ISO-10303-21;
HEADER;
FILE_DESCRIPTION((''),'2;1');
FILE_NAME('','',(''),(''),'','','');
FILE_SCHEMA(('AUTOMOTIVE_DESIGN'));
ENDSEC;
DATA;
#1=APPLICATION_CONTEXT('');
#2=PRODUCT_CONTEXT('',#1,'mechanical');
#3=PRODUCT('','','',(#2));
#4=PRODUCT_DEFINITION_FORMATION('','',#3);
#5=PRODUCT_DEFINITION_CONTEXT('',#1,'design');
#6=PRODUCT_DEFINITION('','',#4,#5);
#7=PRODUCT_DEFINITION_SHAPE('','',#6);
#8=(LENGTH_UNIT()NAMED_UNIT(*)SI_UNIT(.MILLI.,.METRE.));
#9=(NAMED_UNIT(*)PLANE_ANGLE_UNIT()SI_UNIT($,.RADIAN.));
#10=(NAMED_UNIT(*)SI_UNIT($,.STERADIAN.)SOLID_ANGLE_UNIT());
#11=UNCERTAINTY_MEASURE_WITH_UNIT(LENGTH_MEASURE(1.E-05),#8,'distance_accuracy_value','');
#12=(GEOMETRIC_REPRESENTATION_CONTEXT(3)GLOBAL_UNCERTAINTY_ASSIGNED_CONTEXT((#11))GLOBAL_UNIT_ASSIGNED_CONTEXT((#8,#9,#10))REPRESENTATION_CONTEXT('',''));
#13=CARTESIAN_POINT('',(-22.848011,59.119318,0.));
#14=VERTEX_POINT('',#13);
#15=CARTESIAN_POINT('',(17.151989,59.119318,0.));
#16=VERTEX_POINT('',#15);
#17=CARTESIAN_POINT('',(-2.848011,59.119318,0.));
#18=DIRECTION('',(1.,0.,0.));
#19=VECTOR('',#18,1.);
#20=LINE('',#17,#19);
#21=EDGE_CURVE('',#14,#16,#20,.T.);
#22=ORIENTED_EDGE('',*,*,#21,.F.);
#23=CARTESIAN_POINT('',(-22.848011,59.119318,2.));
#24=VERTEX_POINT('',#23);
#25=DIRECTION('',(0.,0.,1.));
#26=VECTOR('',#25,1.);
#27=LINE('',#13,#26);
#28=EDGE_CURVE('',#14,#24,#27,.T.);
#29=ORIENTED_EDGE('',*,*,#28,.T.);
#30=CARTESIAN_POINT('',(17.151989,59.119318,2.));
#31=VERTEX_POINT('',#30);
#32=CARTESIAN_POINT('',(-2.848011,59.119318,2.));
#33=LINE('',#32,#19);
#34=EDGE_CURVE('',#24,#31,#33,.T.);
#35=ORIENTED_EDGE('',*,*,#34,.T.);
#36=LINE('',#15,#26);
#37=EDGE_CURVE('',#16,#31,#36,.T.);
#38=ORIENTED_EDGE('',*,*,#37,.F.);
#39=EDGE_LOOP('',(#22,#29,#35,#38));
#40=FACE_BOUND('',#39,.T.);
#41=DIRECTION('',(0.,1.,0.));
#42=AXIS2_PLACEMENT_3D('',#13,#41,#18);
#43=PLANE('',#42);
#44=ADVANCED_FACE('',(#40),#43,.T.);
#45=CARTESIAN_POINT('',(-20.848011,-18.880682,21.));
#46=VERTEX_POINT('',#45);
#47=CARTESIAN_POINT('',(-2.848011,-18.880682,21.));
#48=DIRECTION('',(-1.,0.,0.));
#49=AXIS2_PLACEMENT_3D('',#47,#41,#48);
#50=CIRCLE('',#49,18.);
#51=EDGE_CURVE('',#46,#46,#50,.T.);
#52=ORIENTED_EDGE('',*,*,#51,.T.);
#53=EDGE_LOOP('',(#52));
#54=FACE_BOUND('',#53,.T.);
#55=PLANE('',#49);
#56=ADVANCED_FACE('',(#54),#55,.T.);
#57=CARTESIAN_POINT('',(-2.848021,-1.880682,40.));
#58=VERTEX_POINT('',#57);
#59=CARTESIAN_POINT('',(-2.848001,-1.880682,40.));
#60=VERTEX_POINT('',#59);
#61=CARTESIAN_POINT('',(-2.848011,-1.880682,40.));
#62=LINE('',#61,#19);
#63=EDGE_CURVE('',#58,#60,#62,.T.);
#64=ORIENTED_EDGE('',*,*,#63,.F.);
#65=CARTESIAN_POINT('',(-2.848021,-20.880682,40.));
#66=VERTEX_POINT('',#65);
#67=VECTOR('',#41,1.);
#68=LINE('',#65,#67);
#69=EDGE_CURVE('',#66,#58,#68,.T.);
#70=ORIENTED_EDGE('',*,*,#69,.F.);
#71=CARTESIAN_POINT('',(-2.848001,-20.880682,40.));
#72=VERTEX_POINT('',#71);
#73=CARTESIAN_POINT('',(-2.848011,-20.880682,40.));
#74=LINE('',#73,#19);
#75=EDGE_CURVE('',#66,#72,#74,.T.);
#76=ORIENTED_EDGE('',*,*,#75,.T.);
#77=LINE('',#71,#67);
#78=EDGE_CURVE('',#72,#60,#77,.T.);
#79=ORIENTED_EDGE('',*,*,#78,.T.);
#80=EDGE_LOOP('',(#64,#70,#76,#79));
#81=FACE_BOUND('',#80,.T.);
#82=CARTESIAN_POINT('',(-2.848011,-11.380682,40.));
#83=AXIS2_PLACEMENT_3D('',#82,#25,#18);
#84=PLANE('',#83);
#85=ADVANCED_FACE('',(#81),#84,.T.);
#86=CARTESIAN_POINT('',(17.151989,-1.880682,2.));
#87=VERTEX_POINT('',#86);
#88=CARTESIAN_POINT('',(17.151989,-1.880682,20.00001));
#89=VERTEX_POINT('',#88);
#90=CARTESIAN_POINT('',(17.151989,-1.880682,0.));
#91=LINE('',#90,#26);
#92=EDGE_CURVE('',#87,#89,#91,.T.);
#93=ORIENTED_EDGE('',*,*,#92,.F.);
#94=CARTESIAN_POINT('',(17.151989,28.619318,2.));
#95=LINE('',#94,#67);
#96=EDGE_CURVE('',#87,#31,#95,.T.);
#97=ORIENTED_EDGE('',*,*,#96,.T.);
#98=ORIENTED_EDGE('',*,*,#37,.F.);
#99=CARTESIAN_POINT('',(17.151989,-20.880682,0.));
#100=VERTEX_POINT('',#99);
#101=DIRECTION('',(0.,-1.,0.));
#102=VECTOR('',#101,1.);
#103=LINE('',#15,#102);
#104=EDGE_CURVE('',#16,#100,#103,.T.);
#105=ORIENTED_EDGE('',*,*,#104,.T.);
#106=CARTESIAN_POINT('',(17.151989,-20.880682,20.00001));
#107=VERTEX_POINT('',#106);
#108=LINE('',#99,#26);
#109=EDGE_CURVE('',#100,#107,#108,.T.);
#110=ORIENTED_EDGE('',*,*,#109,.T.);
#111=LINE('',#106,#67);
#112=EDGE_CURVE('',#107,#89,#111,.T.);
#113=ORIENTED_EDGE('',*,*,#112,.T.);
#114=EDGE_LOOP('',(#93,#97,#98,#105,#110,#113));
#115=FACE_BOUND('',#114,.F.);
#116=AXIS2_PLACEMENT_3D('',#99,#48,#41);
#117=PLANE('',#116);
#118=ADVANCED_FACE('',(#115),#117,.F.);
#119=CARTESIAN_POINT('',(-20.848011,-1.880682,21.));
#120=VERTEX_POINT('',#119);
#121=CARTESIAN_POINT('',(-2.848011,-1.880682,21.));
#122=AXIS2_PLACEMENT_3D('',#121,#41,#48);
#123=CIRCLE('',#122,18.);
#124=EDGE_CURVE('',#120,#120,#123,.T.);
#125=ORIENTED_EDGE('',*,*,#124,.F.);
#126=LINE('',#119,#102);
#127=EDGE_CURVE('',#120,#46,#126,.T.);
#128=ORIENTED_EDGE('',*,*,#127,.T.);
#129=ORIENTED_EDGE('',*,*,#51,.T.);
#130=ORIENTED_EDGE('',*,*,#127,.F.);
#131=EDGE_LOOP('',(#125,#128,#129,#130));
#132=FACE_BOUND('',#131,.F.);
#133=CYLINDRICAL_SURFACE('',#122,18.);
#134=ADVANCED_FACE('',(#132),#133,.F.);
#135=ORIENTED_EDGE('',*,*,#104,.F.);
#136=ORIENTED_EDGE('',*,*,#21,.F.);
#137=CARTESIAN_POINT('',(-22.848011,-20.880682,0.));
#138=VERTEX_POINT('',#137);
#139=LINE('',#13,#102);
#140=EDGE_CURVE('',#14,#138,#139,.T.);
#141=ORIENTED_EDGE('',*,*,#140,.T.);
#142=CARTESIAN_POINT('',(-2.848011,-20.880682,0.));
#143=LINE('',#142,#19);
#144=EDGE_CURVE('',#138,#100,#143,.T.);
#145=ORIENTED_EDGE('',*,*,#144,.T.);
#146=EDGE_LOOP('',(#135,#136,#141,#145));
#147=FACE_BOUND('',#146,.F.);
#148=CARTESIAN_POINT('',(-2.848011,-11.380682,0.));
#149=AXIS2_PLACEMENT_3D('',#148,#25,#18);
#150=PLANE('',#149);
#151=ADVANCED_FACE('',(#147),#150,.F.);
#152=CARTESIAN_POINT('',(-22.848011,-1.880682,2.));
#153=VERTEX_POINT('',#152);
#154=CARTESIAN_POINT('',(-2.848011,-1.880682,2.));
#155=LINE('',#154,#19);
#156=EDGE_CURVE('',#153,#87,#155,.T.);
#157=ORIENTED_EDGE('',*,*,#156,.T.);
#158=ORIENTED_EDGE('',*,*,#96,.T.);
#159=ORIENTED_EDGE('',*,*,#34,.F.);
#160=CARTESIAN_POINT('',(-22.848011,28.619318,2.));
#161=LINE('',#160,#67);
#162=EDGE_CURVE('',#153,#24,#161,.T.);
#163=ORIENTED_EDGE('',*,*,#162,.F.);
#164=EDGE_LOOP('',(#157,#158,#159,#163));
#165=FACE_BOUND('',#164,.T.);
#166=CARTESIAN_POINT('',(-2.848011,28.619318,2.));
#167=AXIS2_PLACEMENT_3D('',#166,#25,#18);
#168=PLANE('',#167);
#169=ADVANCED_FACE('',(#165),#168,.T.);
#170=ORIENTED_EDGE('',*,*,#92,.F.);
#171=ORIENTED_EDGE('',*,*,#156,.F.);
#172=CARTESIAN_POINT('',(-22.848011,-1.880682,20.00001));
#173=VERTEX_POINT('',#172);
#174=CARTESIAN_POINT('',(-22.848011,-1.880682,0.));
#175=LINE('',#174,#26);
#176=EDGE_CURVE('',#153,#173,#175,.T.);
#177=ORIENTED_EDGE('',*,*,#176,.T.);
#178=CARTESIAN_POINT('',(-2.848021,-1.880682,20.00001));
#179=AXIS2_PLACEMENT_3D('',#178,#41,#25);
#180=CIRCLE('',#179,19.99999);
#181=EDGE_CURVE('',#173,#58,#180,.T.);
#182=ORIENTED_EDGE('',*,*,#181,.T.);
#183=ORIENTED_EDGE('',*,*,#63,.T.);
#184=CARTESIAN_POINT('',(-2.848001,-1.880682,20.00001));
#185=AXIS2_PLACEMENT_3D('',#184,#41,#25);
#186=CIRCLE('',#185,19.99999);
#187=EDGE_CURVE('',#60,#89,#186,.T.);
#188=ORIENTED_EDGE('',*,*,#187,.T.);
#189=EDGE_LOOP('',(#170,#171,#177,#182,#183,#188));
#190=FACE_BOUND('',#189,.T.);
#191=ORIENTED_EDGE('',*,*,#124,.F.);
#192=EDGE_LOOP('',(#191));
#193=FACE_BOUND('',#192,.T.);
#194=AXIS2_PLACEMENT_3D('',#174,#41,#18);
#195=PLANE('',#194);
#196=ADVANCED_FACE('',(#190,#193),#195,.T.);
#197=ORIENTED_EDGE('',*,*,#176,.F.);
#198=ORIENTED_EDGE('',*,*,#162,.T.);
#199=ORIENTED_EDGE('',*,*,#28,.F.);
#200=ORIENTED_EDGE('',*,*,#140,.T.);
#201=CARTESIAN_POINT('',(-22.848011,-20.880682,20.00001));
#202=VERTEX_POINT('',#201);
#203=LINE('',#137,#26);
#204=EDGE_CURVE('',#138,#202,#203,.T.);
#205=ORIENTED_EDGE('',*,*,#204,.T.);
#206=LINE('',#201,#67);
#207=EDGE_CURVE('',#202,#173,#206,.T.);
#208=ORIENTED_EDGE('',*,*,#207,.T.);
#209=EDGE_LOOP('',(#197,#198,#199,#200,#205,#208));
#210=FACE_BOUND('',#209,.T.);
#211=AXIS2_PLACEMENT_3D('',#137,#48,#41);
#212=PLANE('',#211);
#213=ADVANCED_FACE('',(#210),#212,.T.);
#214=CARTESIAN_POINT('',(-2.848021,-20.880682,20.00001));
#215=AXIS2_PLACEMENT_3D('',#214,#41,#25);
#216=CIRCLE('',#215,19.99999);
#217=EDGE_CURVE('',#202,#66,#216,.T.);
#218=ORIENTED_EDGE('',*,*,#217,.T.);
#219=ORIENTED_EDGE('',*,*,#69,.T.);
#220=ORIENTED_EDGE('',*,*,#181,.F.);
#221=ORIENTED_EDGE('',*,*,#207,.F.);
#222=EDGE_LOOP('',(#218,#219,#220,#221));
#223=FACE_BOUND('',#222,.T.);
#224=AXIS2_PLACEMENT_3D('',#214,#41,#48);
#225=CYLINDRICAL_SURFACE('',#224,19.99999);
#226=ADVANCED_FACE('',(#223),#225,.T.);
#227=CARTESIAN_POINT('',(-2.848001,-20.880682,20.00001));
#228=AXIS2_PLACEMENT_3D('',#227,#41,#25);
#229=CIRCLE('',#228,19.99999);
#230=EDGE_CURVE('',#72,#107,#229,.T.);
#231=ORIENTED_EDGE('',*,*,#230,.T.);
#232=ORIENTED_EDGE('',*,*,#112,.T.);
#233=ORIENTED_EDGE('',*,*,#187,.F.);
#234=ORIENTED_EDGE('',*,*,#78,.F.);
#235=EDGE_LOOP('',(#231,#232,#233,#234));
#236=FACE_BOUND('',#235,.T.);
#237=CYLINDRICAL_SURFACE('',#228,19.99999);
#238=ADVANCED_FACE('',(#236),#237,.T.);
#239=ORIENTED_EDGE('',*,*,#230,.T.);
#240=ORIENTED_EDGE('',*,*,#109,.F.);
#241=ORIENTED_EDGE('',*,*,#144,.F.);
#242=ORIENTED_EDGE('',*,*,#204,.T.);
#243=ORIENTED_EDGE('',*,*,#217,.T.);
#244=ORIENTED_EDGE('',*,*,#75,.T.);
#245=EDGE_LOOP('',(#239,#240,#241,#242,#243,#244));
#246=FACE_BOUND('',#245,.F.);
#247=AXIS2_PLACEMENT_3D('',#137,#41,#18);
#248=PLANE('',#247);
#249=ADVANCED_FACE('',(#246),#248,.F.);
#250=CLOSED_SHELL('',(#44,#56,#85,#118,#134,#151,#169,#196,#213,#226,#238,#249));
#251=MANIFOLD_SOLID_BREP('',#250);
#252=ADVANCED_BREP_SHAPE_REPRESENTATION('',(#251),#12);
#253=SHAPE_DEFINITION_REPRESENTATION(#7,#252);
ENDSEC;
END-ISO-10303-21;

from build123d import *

# Parameters (mm, degrees)
F0_W     = 40
F0_H     = 61
F1_DEPTH = 2
F0_H_2   = 19
F2_DEPTH = 40
F3_R     = 18
F4_DEPTH = 17
F5_R     = 19.99999


# Not quite as in the source:
# - a fillet or chamfer is up to 0.001 mm smaller than in the source, because OpenCascade refuses the exact size


with BuildPart() as f1:
    # F0 (on Top) → F1 (new body)
    with BuildSketch(Plane.XY):
        with Locations((-2.8480109572, 28.6193176061)):
            Rectangle(F0_W, F0_H)
    extrude(amount=F1_DEPTH)

    # F0 (on Top) → F2 (join)
    with BuildSketch(Plane.XY):
        with Locations((-2.8480109572, -11.3806823939)):
            Rectangle(F0_W, F0_H_2)
    extrude(amount=F2_DEPTH)

    # F3 (on face) → F4 (cut)
    with BuildSketch(Plane(origin=(0, -1.8806823939, 0), x_dir=(-1, 0, 0), z_dir=(0, 1, 0))):
        with Locations((2.8480109572, 21)):
            Circle(F3_R)
    extrude(amount=-F4_DEPTH, mode=Mode.SUBTRACT)

    # F5 (radius 20 in the source; OpenCascade refuses exactly that, so slightly less here)
    f5_edges = [f1.edges().sort_by_distance(p)[0] for p in [
        (17.151989, -11.380682, 40),
        (-22.848011, -11.380682, 40),
    ]]
    fillet(f5_edges, radius=F5_R)


solid = f1.part
